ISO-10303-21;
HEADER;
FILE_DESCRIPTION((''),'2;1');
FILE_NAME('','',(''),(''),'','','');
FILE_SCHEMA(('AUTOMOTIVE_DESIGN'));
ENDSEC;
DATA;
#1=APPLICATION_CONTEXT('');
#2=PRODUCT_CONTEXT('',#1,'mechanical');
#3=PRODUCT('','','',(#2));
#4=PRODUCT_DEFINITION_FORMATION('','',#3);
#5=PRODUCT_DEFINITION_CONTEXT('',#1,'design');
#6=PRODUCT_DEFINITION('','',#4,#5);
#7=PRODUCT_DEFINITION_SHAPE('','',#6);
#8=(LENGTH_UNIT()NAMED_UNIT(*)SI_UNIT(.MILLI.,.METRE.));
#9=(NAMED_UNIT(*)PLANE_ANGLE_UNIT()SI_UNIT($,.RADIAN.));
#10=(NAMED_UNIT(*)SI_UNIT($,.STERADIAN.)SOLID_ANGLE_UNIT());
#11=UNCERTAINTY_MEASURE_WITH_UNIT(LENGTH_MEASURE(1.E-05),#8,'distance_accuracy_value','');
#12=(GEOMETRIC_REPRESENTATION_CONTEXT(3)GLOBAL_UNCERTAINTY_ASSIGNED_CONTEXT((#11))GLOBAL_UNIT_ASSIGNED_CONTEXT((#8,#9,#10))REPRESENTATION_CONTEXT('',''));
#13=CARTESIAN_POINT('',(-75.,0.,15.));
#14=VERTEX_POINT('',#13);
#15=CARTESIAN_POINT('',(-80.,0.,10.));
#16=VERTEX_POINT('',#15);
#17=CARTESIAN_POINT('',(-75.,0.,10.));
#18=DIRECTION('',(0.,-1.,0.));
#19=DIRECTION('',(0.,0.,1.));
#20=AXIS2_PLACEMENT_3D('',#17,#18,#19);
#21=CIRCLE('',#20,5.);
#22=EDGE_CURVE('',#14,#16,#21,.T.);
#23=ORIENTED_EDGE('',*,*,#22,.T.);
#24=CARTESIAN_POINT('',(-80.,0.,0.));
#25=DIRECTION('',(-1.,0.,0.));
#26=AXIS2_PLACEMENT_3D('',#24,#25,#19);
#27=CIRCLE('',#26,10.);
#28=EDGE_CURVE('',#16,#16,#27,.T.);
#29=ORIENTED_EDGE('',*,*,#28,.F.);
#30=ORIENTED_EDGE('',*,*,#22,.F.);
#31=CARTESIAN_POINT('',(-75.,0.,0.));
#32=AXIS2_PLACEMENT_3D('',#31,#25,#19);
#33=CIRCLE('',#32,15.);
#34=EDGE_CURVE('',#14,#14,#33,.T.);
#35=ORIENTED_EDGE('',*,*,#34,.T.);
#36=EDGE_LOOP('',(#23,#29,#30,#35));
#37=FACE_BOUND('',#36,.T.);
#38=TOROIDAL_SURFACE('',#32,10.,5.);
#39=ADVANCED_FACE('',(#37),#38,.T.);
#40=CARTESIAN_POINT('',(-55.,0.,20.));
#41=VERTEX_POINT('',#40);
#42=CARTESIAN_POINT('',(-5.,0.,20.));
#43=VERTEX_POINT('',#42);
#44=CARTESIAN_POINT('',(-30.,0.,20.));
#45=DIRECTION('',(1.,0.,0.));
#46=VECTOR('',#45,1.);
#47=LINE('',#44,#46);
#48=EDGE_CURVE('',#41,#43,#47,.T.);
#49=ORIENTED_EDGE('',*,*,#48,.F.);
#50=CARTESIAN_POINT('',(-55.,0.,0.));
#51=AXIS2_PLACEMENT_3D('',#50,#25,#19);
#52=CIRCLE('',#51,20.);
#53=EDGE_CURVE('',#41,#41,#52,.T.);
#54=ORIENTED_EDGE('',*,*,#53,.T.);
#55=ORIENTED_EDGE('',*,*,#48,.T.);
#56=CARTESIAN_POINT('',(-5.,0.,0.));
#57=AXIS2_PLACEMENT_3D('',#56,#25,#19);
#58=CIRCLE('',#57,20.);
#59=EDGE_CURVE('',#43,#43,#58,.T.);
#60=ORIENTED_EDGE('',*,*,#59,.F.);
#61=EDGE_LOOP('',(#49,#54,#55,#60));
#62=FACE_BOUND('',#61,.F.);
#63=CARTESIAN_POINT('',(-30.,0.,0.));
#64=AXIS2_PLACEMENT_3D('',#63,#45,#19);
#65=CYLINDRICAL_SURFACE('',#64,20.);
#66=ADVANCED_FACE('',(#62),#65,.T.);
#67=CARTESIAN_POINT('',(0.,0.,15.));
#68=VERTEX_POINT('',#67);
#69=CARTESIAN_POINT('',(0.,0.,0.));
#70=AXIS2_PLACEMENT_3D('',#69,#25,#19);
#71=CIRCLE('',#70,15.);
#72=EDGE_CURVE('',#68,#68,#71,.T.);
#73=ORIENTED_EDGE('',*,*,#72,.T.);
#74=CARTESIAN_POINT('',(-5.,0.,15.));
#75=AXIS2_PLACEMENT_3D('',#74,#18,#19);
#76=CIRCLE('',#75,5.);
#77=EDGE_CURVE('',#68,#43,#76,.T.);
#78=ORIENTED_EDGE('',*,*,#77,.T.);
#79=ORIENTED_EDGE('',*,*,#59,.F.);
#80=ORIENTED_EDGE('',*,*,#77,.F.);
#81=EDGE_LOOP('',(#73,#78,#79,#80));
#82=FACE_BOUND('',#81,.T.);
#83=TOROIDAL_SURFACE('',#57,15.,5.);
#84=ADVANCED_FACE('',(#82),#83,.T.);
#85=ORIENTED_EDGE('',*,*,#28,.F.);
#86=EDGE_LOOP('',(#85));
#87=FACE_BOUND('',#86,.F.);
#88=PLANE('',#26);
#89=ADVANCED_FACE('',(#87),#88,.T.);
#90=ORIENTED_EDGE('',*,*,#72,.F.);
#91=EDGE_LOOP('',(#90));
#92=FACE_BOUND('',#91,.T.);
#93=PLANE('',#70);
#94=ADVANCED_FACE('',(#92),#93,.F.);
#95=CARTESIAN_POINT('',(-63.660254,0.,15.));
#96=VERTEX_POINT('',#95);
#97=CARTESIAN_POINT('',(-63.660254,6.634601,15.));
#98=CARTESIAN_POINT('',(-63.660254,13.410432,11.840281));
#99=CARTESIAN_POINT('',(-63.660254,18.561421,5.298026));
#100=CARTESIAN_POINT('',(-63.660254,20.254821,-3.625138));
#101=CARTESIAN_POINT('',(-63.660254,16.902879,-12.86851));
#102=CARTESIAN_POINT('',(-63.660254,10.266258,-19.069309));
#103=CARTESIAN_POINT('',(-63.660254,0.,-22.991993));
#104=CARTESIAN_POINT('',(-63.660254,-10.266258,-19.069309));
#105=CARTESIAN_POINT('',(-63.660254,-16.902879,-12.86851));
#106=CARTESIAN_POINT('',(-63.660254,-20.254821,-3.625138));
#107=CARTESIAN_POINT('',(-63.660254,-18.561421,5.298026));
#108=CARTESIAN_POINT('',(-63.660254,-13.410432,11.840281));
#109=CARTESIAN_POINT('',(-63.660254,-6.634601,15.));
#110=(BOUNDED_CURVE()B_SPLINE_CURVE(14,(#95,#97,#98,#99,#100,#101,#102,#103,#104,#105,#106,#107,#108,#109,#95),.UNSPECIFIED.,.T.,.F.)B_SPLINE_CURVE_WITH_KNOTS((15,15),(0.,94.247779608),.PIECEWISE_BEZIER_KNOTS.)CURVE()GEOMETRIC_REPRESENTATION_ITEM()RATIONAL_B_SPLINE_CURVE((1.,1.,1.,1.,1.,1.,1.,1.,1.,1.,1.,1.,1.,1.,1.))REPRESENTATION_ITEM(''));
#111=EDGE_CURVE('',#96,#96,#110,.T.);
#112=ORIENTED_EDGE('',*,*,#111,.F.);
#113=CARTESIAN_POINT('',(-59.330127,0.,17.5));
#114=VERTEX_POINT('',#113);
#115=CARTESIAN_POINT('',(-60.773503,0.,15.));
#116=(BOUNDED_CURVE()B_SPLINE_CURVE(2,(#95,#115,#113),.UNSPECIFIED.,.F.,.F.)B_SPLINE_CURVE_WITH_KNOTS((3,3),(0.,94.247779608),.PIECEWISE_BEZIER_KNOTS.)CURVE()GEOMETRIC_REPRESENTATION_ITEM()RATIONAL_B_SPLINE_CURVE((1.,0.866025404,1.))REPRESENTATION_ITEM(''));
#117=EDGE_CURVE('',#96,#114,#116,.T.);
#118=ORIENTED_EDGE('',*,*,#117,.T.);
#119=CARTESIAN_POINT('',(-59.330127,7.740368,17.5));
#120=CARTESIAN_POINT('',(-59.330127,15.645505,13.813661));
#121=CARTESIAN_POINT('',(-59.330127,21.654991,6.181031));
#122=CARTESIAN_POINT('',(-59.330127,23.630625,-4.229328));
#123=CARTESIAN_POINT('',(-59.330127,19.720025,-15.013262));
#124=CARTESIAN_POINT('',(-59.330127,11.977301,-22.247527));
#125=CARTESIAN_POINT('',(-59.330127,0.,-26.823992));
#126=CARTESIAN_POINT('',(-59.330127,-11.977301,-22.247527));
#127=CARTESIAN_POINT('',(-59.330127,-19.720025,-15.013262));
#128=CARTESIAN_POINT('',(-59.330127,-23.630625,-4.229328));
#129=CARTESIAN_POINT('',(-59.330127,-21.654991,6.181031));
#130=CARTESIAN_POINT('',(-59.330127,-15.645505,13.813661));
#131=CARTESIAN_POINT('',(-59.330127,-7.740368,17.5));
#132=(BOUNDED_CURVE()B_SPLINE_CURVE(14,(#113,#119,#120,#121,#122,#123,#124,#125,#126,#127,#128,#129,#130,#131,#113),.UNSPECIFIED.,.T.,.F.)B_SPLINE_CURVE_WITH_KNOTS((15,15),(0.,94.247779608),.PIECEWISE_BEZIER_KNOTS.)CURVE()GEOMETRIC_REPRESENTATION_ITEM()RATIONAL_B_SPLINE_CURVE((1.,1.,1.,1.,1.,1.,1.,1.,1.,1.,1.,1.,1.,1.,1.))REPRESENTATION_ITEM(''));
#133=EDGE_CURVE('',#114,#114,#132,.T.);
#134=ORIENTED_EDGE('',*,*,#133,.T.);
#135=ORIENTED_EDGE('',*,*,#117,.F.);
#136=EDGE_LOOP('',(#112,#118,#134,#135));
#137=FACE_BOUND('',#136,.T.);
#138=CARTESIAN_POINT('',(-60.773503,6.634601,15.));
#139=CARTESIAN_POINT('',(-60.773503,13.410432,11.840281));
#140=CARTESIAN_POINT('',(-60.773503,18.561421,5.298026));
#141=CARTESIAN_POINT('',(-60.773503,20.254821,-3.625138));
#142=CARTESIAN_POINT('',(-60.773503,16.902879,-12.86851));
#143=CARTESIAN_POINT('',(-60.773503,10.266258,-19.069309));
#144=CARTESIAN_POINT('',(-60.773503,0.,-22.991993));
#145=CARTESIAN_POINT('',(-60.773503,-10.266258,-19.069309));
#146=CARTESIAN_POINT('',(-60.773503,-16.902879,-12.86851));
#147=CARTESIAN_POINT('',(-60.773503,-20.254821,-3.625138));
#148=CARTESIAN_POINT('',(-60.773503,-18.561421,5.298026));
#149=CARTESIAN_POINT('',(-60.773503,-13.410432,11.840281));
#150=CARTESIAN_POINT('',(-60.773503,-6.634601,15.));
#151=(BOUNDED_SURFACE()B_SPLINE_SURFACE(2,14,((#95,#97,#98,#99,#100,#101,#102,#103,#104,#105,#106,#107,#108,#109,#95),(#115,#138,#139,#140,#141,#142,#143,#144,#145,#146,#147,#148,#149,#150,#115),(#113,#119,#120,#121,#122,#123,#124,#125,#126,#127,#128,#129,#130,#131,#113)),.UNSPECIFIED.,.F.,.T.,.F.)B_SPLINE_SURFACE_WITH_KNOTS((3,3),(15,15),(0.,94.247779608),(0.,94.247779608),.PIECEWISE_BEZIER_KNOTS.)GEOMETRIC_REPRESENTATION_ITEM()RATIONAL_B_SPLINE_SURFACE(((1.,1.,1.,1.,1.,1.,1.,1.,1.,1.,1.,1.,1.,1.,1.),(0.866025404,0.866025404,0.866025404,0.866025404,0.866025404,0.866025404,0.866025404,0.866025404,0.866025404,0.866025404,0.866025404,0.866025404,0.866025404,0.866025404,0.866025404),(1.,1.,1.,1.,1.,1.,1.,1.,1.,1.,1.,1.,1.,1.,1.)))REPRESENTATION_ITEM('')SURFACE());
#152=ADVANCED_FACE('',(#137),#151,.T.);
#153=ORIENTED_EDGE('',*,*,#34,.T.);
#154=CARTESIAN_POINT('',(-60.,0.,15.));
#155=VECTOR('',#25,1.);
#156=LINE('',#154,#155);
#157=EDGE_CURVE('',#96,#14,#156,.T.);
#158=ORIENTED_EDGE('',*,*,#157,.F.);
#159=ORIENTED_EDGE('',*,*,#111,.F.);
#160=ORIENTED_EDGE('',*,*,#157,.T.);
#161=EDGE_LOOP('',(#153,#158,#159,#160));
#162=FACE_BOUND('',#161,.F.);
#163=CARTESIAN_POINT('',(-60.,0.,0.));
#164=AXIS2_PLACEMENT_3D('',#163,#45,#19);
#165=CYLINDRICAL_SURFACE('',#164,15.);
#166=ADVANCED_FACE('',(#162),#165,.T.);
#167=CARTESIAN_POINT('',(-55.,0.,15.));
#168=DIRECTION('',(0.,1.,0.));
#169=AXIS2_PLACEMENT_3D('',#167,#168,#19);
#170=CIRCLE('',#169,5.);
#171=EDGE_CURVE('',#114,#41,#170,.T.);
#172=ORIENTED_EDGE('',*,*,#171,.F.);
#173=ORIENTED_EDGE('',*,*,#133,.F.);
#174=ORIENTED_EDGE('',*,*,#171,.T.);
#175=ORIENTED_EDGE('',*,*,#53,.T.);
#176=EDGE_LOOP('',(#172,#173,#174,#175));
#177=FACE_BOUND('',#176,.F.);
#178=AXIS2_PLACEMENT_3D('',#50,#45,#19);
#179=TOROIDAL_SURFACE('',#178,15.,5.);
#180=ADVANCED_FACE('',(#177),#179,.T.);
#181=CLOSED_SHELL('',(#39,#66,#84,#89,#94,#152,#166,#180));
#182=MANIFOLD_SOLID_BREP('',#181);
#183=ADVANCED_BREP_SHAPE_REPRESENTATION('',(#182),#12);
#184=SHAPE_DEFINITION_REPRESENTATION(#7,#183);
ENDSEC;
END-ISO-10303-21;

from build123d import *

# Parameters (mm, degrees)
F0_W     = 60
F0_H     = 20
F2_R     = 5
F3_DEPTH = 20
F4_R     = 5


with BuildPart() as f1:
    # F0 (on Front) → F1 (revolve)
    with BuildSketch(Plane.XZ):
        with Locations((-30, 10)):
            Rectangle(F0_W, F0_H)
    revolve(axis=Axis((-30, 0, 0), (-1, 0, 0)))

    # F2
    f2_edges = [f1.edges().sort_by_distance(p)[0] for p in [
        (-60, 0, -20),
        (0, 0, -20),
    ]]
    fillet(f2_edges, radius=F2_R)

    # F3 (add): a face of the model
    f3_faces = [f1.faces().sort_by_distance(p)[0] for p in [
        (-60, 0, 0),
    ]]
    extrude(f3_faces, amount=F3_DEPTH)

    # F4
    f4_edges = [f1.edges().sort_by_distance(p)[0] for p in [
        (-60, 0, -15),
        (-80, 0, -15),
    ]]
    fillet(f4_edges, radius=F4_R)


solid = f1.part
